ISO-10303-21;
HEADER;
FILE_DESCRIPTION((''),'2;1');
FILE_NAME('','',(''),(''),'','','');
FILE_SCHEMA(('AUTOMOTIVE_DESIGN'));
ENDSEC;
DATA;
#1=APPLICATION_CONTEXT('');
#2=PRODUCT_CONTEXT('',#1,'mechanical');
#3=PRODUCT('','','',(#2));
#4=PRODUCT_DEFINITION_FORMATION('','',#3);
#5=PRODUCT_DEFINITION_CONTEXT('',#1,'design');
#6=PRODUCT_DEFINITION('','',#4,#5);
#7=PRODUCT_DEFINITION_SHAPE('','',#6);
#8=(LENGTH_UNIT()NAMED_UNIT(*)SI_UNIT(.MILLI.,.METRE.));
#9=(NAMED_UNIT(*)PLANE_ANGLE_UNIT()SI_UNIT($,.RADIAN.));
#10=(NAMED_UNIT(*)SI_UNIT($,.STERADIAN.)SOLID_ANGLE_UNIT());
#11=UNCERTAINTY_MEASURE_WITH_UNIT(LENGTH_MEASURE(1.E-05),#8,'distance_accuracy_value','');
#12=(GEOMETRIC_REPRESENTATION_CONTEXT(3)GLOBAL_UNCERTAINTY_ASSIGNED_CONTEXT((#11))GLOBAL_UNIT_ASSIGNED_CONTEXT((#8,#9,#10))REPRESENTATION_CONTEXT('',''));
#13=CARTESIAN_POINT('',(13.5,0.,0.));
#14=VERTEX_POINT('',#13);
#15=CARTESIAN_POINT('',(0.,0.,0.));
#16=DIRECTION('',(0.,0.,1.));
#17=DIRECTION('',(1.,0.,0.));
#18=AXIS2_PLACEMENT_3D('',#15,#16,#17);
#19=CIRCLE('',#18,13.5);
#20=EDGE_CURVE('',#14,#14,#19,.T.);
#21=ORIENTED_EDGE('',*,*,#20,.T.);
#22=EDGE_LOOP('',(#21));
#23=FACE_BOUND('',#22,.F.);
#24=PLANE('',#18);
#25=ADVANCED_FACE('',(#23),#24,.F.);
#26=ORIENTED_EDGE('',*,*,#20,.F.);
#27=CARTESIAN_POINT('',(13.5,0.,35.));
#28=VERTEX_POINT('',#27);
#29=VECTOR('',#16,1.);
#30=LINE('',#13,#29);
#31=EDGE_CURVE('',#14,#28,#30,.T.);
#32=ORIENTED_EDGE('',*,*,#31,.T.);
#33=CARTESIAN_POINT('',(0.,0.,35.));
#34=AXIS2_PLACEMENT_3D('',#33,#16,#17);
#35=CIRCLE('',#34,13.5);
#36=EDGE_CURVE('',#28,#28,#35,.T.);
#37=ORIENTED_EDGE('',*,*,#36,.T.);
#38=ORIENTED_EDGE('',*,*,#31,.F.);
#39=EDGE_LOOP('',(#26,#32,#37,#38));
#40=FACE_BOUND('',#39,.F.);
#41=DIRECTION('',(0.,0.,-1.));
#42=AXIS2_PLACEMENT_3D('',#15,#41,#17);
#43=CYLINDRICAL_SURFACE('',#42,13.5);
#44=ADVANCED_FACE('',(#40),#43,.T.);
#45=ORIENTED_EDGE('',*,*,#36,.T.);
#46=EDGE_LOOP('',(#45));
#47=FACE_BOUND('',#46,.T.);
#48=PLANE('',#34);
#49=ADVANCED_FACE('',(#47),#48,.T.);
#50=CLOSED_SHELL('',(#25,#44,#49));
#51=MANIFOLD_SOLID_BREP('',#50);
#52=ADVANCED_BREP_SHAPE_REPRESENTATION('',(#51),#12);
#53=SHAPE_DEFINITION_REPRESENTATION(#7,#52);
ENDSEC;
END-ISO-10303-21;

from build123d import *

# Parameters (mm, degrees)
F0_R     = 13.5
F1_DEPTH = 35
F2_R     = 13.05
F3_DEPTH = 3


# Not quite as in the source:
# - a feature names something its author has since deleted; it is built from what else it names


with BuildPart() as f1:
    # F0 (on Top) → F1 (new body)
    with BuildSketch(Plane.XY):
        Circle(F0_R)
    extrude(amount=F1_DEPTH)

    # F2 (on Top) → F3 (join)
    with BuildSketch(Plane.XY):
        Circle(F2_R)
    extrude(amount=F3_DEPTH)


solid = f1.part
